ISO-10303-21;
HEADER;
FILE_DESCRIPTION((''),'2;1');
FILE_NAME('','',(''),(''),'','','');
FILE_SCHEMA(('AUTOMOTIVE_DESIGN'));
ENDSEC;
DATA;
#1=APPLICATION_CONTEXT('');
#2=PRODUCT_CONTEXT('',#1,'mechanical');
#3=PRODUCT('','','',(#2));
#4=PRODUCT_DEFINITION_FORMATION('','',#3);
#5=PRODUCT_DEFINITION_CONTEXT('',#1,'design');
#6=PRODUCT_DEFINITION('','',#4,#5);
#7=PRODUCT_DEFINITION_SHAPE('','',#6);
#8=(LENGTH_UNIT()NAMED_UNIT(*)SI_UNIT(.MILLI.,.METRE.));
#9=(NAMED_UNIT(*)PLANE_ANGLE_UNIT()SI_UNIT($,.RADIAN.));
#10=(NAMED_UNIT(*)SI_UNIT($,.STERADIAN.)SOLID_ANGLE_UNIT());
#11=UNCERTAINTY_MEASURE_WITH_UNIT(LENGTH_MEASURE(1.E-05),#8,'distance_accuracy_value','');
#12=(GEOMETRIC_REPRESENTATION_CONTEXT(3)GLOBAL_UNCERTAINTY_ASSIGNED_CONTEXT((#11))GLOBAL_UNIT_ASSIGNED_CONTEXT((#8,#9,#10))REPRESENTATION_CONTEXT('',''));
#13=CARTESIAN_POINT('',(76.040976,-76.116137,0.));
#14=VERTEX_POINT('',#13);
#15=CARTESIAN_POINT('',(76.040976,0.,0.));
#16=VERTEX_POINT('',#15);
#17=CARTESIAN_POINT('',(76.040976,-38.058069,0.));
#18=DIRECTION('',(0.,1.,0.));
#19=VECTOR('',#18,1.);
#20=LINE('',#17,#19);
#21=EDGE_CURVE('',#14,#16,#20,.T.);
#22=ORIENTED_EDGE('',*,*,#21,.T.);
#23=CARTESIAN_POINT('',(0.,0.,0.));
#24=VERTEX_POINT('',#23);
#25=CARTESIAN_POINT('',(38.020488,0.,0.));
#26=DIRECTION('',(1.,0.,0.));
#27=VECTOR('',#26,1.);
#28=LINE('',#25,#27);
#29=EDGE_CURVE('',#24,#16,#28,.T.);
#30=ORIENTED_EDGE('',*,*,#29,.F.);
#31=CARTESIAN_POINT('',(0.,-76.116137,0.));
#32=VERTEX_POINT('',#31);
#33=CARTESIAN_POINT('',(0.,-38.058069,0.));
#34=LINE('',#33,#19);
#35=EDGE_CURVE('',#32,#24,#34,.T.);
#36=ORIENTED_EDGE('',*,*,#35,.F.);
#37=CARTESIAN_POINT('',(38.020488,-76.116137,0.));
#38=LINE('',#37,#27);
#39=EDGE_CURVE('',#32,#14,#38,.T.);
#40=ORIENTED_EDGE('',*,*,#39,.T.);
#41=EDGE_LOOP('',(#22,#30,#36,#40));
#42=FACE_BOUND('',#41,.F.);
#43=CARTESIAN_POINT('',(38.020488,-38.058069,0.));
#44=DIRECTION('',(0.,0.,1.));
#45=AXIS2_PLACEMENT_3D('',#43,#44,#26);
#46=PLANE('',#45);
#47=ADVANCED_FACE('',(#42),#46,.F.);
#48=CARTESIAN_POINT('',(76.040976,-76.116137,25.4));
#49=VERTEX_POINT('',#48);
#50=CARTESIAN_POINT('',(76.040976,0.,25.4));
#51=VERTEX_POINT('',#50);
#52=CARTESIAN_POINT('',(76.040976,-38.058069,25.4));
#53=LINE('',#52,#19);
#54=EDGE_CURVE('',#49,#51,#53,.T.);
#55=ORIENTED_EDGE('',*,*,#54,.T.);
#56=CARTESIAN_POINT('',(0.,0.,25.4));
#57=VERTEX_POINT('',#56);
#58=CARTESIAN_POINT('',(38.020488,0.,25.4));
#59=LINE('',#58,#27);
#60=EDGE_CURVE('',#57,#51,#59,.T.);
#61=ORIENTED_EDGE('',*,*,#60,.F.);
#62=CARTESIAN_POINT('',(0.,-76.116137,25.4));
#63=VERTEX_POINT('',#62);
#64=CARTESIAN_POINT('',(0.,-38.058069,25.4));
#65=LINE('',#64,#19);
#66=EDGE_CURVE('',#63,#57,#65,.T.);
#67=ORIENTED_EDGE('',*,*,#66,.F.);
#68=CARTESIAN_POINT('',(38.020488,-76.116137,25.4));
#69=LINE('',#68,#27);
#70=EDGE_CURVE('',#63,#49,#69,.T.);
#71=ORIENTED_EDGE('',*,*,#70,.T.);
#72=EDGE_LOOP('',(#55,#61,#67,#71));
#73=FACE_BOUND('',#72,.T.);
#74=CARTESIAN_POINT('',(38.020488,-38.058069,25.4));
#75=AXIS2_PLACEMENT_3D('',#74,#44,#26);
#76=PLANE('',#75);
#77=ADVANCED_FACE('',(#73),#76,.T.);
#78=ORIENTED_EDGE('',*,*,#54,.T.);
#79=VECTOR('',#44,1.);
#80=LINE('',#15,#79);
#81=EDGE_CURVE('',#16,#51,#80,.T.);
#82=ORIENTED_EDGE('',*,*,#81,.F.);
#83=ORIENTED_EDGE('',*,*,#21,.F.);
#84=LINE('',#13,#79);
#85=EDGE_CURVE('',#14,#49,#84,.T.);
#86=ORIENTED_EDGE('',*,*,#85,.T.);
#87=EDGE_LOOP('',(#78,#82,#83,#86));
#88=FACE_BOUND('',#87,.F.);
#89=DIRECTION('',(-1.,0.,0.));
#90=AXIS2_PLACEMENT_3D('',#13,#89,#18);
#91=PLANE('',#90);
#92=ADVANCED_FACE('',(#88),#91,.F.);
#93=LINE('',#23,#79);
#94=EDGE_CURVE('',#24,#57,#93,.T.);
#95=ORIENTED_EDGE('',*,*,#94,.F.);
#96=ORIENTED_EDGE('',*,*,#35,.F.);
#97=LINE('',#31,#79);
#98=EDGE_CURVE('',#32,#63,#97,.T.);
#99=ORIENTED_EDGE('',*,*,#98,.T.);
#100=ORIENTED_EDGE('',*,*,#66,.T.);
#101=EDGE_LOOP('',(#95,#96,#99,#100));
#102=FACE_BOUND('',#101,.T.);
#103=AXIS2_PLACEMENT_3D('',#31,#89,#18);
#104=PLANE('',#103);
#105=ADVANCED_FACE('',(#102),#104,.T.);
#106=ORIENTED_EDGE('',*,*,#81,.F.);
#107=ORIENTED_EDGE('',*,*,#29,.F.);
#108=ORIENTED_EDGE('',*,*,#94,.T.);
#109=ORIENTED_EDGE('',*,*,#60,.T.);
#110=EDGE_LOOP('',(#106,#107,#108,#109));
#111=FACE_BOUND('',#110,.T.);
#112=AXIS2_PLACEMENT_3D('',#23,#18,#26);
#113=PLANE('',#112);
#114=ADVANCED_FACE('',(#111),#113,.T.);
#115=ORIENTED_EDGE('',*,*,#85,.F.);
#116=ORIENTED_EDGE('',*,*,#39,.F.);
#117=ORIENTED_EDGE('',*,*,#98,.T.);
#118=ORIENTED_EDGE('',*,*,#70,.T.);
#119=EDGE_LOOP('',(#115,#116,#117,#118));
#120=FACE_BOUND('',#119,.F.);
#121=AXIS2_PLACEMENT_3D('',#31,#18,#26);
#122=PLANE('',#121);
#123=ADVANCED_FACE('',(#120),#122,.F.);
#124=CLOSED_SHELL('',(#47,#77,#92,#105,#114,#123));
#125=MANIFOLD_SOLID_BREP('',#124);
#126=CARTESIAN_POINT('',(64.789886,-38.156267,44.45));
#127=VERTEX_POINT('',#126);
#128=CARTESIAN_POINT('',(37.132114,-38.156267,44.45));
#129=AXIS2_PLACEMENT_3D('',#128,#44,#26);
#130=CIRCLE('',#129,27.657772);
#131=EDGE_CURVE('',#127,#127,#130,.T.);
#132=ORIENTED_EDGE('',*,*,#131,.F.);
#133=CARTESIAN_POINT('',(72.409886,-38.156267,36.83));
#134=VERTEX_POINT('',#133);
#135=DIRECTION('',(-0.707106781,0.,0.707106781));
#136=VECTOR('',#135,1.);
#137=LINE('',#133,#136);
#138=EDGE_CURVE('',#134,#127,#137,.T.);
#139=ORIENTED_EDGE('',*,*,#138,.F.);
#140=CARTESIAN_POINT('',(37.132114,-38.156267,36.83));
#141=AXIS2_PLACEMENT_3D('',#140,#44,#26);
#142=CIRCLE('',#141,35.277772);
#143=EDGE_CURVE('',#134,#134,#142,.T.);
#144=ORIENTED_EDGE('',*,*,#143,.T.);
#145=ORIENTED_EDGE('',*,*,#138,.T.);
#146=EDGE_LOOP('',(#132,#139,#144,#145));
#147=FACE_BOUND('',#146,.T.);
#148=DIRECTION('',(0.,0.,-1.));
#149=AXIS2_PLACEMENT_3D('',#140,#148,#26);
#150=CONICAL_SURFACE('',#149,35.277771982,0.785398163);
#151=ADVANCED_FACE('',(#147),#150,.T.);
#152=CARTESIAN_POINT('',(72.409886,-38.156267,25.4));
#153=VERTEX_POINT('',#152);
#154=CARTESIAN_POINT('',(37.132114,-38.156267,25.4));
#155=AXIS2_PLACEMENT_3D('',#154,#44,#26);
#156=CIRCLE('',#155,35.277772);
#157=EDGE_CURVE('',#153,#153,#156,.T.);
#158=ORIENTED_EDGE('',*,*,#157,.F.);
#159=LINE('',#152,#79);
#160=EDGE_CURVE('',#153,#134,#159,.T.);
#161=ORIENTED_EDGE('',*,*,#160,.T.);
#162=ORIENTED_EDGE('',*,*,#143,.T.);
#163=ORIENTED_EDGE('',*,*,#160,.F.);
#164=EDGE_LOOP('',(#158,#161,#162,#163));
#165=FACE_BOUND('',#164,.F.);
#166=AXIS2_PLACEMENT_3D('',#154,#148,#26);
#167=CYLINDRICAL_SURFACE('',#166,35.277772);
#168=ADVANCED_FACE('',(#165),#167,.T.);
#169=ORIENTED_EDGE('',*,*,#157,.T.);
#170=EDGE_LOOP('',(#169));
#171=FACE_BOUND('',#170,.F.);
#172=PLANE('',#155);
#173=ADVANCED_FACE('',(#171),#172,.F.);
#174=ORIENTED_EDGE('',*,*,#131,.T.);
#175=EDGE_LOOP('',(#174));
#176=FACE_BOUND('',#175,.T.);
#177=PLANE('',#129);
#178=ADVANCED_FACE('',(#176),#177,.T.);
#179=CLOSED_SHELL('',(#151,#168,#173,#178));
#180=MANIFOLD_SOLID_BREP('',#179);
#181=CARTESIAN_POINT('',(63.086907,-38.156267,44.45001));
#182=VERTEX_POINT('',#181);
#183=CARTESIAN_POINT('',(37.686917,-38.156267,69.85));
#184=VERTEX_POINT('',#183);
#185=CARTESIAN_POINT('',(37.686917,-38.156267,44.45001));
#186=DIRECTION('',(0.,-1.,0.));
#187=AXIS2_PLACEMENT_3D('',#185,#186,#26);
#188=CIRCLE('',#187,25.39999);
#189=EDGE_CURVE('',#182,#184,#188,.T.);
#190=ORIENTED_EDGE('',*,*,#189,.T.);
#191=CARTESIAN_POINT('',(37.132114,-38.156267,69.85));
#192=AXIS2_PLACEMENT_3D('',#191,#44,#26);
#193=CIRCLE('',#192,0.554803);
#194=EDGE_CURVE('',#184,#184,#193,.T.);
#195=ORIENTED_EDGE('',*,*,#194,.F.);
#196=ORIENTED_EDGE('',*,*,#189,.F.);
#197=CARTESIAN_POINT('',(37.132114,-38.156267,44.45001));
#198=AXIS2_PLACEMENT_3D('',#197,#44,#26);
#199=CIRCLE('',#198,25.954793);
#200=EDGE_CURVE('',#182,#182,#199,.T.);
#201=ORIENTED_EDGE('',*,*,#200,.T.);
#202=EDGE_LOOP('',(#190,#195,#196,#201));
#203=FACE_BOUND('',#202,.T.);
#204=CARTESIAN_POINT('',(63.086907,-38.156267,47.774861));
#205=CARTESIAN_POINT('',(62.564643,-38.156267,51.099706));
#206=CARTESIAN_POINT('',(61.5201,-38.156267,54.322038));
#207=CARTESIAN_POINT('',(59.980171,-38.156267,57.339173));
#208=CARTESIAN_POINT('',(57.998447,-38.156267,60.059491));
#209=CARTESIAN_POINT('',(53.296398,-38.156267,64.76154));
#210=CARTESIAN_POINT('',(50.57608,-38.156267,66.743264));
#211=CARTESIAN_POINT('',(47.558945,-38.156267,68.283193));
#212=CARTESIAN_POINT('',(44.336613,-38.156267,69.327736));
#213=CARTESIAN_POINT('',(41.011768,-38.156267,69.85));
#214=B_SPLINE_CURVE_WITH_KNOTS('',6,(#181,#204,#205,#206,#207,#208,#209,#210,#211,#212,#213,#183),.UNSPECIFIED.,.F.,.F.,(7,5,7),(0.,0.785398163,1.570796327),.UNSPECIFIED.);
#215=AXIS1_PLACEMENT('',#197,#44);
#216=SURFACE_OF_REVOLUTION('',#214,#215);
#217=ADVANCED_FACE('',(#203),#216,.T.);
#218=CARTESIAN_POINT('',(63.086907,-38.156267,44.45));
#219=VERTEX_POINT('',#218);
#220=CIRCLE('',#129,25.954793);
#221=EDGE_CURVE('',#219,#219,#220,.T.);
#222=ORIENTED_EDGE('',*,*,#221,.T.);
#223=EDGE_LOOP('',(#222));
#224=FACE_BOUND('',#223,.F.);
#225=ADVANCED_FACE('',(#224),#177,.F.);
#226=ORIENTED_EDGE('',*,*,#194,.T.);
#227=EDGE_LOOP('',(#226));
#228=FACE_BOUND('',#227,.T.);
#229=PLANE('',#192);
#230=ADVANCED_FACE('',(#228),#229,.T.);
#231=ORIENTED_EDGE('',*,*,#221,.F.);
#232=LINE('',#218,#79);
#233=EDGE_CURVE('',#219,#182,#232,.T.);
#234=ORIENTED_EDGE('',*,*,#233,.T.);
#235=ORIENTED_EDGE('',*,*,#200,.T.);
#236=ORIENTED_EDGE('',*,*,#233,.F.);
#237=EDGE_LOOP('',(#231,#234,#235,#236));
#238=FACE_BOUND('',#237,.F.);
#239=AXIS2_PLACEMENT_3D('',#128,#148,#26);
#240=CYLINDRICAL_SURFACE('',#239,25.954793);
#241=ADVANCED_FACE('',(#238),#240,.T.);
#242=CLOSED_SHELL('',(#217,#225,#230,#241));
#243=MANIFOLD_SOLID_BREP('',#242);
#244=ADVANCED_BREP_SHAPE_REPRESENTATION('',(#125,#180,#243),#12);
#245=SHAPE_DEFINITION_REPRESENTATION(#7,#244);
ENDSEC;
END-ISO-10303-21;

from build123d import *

# Parameters (mm, degrees)
F0_W     = 76.0409757495
F0_H     = 76.1161372066
F1_DEPTH = 25.4
F2_R     = 35.2777719823
F3_DEPTH = 19.05
F4_R     = 25.9547927972
F5_DEPTH = 25.4
F6_R     = 25.39999
F7_SIZE  = 7.62


# Not quite as in the source:
# - a fillet or chamfer is up to 0.001 mm smaller than in the source, because OpenCascade refuses the exact size


with BuildPart() as f1:
    # F0 (on Top) → F1 (new body)
    with BuildSketch(Plane.XY):
        with Locations((38.0204878747, -38.0580686033)):
            Rectangle(F0_W, F0_H)
    extrude(amount=F1_DEPTH)


with BuildPart() as f3:
    # F2 (on face) → F3 (new body)
    with BuildSketch(Plane.XY.offset(25.4)):
        with Locations((37.132114172, -38.1562672555)):
            Circle(F2_R)
    extrude(amount=F3_DEPTH)

    # F7
    f7_edges = [f3.edges().sort_by_distance(p)[0] for p in [
        (1.854342, -38.156267, 44.45),
    ]]
    chamfer(f7_edges, length=F7_SIZE)


with BuildPart() as f5:
    # F4 (on face) → F5 (new body)
    with BuildSketch(Plane.XY.offset(44.45)):
        with Locations((37.132114172, -38.1562672555)):
            Circle(F4_R)
    extrude(amount=F5_DEPTH)

    # F6 (radius 25.4 in the source; OpenCascade refuses exactly that, so slightly less here)
    f6_edges = [f5.edges().sort_by_distance(p)[0] for p in [
        (11.177321, -38.156267, 69.85),
    ]]
    fillet(f6_edges, radius=F6_R)


solid = Compound([f1.part, f3.part, f5.part])
